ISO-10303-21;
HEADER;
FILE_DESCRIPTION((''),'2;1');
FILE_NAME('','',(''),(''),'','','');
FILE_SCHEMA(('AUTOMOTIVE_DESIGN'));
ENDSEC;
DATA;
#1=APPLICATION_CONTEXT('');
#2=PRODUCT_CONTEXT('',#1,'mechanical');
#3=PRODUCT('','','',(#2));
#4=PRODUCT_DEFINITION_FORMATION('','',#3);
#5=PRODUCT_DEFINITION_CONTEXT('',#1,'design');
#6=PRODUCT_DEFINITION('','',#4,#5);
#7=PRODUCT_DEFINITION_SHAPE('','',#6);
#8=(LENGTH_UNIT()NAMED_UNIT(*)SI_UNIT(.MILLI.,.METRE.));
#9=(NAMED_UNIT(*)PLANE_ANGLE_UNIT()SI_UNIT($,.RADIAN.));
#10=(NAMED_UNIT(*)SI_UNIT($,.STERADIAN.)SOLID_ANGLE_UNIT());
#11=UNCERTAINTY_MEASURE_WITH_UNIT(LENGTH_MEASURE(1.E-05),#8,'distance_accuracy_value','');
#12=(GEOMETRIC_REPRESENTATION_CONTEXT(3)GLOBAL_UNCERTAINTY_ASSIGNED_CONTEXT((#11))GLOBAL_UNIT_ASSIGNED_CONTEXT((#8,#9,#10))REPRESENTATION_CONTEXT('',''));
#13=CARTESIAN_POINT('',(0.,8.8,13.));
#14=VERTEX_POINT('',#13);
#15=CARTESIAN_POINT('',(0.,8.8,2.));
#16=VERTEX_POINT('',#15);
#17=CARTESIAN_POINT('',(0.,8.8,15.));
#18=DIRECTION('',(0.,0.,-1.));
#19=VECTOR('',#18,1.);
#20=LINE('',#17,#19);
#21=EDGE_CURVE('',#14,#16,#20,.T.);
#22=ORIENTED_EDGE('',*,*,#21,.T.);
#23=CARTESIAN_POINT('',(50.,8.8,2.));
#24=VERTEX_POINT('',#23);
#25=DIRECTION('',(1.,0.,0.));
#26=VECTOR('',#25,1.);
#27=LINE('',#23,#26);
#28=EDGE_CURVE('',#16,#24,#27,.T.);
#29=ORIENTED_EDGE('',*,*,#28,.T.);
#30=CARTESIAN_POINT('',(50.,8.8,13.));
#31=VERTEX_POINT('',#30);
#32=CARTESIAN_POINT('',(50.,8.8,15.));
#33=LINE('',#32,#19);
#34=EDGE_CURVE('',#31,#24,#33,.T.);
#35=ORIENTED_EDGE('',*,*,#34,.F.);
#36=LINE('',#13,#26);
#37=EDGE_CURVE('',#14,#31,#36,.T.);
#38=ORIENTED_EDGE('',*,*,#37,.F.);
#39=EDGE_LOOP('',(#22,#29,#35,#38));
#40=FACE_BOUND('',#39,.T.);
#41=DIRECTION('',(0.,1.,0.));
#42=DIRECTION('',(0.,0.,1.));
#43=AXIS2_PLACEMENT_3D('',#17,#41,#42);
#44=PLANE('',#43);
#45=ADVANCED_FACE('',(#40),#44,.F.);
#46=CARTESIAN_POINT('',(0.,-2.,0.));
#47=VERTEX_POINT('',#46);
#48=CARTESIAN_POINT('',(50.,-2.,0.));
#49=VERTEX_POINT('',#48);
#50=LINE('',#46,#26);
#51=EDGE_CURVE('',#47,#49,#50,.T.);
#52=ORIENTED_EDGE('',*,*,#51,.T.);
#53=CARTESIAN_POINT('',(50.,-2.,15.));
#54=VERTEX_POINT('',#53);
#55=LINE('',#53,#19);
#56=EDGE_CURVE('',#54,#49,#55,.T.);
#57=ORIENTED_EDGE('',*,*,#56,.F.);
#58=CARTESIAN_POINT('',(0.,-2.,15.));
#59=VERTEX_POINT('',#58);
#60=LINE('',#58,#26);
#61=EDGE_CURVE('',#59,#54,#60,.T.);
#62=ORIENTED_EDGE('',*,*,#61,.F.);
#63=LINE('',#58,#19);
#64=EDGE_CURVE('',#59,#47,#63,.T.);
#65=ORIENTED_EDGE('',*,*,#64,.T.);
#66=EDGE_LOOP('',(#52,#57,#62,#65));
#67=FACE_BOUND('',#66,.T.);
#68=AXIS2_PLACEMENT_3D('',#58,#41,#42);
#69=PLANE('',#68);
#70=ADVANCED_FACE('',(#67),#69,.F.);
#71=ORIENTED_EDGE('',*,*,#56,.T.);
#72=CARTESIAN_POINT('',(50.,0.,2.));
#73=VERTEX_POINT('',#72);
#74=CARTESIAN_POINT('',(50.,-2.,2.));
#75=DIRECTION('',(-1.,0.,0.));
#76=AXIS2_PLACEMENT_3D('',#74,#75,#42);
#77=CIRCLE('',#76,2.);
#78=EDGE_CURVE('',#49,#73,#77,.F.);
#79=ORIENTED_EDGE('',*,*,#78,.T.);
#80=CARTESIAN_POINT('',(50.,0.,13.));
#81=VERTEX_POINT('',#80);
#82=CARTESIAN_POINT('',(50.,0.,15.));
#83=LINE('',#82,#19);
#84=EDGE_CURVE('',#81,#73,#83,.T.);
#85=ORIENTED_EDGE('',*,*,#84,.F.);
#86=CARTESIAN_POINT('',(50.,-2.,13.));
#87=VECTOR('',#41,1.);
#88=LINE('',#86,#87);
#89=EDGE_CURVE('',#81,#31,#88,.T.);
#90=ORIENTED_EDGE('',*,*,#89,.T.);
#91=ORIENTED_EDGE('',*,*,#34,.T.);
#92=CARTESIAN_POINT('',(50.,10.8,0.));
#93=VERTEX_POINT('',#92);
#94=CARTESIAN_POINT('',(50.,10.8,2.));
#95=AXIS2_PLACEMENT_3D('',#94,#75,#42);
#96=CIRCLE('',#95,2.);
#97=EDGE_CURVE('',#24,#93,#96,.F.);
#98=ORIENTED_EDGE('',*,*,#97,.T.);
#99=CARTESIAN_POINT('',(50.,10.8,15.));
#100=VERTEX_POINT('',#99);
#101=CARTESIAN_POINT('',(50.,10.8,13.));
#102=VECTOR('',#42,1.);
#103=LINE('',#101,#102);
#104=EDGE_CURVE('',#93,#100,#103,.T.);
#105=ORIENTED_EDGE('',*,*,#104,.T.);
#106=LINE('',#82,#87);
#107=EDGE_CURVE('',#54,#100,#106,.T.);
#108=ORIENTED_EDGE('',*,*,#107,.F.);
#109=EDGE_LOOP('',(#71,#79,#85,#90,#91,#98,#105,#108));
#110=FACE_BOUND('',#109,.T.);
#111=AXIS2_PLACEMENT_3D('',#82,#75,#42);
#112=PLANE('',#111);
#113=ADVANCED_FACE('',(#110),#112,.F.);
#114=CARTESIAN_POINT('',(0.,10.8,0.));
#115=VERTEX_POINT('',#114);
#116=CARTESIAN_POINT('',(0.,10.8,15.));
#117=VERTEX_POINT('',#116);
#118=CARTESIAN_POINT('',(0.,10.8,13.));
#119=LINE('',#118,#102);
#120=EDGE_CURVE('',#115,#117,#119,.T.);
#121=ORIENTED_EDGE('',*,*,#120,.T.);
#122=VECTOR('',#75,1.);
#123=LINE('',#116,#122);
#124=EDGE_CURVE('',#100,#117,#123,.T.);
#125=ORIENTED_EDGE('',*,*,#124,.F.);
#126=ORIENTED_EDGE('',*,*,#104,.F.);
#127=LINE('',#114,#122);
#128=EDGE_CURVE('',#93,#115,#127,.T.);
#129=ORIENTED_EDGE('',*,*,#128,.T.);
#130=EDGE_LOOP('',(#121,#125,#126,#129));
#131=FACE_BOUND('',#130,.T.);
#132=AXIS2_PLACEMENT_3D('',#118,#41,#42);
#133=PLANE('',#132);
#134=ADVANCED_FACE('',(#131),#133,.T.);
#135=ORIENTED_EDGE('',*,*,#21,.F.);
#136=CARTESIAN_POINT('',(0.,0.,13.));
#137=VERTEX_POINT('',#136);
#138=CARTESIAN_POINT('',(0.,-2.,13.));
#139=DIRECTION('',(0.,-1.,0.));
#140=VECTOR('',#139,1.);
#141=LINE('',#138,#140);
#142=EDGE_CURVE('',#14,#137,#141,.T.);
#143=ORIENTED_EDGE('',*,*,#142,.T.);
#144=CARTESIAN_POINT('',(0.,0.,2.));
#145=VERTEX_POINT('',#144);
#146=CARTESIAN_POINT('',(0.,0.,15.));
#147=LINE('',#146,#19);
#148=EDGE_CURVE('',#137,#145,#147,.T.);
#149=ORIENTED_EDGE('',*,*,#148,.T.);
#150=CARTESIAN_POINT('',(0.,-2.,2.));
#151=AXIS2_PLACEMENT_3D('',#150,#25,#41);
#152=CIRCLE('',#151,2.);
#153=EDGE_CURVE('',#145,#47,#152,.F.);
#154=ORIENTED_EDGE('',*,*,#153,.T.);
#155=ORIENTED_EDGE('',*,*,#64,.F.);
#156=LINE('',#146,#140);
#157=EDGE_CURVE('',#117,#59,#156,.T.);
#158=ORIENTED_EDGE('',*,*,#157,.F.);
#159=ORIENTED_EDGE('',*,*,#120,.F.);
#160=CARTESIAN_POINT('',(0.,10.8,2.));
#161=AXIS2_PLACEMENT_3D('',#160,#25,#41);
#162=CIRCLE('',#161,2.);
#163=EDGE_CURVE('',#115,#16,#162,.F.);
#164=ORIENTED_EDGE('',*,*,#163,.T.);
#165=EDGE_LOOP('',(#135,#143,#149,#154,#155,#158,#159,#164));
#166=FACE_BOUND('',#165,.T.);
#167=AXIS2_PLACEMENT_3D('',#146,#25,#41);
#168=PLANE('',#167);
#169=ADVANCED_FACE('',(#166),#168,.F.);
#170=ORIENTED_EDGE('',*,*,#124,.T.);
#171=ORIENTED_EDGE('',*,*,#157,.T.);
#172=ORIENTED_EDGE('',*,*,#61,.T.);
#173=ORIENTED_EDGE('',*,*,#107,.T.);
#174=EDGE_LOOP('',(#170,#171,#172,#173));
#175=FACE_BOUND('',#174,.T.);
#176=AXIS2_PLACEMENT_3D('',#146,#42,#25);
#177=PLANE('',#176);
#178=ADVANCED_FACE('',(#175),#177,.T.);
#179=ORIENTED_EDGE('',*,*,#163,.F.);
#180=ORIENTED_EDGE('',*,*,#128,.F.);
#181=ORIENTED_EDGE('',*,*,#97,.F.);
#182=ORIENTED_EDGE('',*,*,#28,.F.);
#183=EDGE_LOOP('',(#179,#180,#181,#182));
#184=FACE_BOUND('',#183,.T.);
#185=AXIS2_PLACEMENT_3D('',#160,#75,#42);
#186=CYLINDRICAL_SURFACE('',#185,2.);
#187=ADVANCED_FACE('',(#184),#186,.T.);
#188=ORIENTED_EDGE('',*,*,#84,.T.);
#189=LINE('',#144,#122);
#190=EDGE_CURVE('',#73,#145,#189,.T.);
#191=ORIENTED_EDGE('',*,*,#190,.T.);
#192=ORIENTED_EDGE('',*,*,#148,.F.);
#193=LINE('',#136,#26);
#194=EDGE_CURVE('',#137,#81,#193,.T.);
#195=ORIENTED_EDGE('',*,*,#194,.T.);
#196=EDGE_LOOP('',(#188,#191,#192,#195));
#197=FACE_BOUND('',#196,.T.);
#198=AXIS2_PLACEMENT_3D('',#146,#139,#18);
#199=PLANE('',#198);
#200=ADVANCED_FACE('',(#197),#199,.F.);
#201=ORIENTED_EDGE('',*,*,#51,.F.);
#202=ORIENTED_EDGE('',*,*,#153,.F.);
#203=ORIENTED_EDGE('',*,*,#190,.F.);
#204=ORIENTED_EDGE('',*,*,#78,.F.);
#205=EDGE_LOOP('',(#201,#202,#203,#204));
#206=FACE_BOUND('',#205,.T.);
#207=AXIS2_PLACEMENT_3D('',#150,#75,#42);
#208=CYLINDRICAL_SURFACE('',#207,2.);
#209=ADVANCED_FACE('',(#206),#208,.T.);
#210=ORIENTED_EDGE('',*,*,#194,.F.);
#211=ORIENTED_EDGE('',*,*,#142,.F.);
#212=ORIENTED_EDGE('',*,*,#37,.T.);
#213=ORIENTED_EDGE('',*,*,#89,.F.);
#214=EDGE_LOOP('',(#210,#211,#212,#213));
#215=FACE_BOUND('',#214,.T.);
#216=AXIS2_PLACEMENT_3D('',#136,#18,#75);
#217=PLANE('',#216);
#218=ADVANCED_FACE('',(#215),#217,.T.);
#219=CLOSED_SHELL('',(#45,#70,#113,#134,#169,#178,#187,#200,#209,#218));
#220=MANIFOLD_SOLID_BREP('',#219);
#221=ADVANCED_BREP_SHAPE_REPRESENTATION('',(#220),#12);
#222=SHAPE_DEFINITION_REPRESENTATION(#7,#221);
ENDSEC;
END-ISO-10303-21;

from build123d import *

# Parameters (mm, degrees)
SKETCH_1_W        = 50
SKETCH_1_H        = 2
EXTRUDE_1_DEPTH   = 15
EXTRUDE_1_2_DEPTH = 15
SKETCH_2_W        = 50
SKETCH_2_H        = 12.8
EXTRUDE_2_DEPTH   = 2
FILLET_1_R        = 2


with BuildPart() as part:
    # 草图1 → 凸台-拉伸1 (new body)
    with BuildSketch(Plane.XY):
        with Locations((25, -1)):
            Rectangle(SKETCH_1_W, SKETCH_1_H)
    extrude(amount=EXTRUDE_1_DEPTH)



with BuildPart() as body_2:
    # 草图1 → Extrude 1 2 (new body)
    with BuildSketch(Plane.XY):
        with Locations((25, 9.8)):
            Rectangle(SKETCH_1_W, SKETCH_1_H)
    extrude(amount=EXTRUDE_1_2_DEPTH)


with BuildPart() as part_1:
    add(part.part)

    add(body_2.part)  # 凸台-拉伸2 merges body 2
    # 草图2 → 凸台-拉伸2 (add)
    with BuildSketch(Plane.XY.offset(15)):
        with Locations((25, 4.4)):
            Rectangle(SKETCH_2_W, SKETCH_2_H)
    extrude(amount=-EXTRUDE_2_DEPTH)

    # 圆角1
    fillet_1_edges = [part_1.edges().sort_by_distance(p)[0] for p in [
        (25, 0, 0),
        (25, 8.8, 0),
    ]]
    fillet(fillet_1_edges, radius=FILLET_1_R - 0.0001)  # a hair under: the kernel refuses the full size


solid = part_1.part
